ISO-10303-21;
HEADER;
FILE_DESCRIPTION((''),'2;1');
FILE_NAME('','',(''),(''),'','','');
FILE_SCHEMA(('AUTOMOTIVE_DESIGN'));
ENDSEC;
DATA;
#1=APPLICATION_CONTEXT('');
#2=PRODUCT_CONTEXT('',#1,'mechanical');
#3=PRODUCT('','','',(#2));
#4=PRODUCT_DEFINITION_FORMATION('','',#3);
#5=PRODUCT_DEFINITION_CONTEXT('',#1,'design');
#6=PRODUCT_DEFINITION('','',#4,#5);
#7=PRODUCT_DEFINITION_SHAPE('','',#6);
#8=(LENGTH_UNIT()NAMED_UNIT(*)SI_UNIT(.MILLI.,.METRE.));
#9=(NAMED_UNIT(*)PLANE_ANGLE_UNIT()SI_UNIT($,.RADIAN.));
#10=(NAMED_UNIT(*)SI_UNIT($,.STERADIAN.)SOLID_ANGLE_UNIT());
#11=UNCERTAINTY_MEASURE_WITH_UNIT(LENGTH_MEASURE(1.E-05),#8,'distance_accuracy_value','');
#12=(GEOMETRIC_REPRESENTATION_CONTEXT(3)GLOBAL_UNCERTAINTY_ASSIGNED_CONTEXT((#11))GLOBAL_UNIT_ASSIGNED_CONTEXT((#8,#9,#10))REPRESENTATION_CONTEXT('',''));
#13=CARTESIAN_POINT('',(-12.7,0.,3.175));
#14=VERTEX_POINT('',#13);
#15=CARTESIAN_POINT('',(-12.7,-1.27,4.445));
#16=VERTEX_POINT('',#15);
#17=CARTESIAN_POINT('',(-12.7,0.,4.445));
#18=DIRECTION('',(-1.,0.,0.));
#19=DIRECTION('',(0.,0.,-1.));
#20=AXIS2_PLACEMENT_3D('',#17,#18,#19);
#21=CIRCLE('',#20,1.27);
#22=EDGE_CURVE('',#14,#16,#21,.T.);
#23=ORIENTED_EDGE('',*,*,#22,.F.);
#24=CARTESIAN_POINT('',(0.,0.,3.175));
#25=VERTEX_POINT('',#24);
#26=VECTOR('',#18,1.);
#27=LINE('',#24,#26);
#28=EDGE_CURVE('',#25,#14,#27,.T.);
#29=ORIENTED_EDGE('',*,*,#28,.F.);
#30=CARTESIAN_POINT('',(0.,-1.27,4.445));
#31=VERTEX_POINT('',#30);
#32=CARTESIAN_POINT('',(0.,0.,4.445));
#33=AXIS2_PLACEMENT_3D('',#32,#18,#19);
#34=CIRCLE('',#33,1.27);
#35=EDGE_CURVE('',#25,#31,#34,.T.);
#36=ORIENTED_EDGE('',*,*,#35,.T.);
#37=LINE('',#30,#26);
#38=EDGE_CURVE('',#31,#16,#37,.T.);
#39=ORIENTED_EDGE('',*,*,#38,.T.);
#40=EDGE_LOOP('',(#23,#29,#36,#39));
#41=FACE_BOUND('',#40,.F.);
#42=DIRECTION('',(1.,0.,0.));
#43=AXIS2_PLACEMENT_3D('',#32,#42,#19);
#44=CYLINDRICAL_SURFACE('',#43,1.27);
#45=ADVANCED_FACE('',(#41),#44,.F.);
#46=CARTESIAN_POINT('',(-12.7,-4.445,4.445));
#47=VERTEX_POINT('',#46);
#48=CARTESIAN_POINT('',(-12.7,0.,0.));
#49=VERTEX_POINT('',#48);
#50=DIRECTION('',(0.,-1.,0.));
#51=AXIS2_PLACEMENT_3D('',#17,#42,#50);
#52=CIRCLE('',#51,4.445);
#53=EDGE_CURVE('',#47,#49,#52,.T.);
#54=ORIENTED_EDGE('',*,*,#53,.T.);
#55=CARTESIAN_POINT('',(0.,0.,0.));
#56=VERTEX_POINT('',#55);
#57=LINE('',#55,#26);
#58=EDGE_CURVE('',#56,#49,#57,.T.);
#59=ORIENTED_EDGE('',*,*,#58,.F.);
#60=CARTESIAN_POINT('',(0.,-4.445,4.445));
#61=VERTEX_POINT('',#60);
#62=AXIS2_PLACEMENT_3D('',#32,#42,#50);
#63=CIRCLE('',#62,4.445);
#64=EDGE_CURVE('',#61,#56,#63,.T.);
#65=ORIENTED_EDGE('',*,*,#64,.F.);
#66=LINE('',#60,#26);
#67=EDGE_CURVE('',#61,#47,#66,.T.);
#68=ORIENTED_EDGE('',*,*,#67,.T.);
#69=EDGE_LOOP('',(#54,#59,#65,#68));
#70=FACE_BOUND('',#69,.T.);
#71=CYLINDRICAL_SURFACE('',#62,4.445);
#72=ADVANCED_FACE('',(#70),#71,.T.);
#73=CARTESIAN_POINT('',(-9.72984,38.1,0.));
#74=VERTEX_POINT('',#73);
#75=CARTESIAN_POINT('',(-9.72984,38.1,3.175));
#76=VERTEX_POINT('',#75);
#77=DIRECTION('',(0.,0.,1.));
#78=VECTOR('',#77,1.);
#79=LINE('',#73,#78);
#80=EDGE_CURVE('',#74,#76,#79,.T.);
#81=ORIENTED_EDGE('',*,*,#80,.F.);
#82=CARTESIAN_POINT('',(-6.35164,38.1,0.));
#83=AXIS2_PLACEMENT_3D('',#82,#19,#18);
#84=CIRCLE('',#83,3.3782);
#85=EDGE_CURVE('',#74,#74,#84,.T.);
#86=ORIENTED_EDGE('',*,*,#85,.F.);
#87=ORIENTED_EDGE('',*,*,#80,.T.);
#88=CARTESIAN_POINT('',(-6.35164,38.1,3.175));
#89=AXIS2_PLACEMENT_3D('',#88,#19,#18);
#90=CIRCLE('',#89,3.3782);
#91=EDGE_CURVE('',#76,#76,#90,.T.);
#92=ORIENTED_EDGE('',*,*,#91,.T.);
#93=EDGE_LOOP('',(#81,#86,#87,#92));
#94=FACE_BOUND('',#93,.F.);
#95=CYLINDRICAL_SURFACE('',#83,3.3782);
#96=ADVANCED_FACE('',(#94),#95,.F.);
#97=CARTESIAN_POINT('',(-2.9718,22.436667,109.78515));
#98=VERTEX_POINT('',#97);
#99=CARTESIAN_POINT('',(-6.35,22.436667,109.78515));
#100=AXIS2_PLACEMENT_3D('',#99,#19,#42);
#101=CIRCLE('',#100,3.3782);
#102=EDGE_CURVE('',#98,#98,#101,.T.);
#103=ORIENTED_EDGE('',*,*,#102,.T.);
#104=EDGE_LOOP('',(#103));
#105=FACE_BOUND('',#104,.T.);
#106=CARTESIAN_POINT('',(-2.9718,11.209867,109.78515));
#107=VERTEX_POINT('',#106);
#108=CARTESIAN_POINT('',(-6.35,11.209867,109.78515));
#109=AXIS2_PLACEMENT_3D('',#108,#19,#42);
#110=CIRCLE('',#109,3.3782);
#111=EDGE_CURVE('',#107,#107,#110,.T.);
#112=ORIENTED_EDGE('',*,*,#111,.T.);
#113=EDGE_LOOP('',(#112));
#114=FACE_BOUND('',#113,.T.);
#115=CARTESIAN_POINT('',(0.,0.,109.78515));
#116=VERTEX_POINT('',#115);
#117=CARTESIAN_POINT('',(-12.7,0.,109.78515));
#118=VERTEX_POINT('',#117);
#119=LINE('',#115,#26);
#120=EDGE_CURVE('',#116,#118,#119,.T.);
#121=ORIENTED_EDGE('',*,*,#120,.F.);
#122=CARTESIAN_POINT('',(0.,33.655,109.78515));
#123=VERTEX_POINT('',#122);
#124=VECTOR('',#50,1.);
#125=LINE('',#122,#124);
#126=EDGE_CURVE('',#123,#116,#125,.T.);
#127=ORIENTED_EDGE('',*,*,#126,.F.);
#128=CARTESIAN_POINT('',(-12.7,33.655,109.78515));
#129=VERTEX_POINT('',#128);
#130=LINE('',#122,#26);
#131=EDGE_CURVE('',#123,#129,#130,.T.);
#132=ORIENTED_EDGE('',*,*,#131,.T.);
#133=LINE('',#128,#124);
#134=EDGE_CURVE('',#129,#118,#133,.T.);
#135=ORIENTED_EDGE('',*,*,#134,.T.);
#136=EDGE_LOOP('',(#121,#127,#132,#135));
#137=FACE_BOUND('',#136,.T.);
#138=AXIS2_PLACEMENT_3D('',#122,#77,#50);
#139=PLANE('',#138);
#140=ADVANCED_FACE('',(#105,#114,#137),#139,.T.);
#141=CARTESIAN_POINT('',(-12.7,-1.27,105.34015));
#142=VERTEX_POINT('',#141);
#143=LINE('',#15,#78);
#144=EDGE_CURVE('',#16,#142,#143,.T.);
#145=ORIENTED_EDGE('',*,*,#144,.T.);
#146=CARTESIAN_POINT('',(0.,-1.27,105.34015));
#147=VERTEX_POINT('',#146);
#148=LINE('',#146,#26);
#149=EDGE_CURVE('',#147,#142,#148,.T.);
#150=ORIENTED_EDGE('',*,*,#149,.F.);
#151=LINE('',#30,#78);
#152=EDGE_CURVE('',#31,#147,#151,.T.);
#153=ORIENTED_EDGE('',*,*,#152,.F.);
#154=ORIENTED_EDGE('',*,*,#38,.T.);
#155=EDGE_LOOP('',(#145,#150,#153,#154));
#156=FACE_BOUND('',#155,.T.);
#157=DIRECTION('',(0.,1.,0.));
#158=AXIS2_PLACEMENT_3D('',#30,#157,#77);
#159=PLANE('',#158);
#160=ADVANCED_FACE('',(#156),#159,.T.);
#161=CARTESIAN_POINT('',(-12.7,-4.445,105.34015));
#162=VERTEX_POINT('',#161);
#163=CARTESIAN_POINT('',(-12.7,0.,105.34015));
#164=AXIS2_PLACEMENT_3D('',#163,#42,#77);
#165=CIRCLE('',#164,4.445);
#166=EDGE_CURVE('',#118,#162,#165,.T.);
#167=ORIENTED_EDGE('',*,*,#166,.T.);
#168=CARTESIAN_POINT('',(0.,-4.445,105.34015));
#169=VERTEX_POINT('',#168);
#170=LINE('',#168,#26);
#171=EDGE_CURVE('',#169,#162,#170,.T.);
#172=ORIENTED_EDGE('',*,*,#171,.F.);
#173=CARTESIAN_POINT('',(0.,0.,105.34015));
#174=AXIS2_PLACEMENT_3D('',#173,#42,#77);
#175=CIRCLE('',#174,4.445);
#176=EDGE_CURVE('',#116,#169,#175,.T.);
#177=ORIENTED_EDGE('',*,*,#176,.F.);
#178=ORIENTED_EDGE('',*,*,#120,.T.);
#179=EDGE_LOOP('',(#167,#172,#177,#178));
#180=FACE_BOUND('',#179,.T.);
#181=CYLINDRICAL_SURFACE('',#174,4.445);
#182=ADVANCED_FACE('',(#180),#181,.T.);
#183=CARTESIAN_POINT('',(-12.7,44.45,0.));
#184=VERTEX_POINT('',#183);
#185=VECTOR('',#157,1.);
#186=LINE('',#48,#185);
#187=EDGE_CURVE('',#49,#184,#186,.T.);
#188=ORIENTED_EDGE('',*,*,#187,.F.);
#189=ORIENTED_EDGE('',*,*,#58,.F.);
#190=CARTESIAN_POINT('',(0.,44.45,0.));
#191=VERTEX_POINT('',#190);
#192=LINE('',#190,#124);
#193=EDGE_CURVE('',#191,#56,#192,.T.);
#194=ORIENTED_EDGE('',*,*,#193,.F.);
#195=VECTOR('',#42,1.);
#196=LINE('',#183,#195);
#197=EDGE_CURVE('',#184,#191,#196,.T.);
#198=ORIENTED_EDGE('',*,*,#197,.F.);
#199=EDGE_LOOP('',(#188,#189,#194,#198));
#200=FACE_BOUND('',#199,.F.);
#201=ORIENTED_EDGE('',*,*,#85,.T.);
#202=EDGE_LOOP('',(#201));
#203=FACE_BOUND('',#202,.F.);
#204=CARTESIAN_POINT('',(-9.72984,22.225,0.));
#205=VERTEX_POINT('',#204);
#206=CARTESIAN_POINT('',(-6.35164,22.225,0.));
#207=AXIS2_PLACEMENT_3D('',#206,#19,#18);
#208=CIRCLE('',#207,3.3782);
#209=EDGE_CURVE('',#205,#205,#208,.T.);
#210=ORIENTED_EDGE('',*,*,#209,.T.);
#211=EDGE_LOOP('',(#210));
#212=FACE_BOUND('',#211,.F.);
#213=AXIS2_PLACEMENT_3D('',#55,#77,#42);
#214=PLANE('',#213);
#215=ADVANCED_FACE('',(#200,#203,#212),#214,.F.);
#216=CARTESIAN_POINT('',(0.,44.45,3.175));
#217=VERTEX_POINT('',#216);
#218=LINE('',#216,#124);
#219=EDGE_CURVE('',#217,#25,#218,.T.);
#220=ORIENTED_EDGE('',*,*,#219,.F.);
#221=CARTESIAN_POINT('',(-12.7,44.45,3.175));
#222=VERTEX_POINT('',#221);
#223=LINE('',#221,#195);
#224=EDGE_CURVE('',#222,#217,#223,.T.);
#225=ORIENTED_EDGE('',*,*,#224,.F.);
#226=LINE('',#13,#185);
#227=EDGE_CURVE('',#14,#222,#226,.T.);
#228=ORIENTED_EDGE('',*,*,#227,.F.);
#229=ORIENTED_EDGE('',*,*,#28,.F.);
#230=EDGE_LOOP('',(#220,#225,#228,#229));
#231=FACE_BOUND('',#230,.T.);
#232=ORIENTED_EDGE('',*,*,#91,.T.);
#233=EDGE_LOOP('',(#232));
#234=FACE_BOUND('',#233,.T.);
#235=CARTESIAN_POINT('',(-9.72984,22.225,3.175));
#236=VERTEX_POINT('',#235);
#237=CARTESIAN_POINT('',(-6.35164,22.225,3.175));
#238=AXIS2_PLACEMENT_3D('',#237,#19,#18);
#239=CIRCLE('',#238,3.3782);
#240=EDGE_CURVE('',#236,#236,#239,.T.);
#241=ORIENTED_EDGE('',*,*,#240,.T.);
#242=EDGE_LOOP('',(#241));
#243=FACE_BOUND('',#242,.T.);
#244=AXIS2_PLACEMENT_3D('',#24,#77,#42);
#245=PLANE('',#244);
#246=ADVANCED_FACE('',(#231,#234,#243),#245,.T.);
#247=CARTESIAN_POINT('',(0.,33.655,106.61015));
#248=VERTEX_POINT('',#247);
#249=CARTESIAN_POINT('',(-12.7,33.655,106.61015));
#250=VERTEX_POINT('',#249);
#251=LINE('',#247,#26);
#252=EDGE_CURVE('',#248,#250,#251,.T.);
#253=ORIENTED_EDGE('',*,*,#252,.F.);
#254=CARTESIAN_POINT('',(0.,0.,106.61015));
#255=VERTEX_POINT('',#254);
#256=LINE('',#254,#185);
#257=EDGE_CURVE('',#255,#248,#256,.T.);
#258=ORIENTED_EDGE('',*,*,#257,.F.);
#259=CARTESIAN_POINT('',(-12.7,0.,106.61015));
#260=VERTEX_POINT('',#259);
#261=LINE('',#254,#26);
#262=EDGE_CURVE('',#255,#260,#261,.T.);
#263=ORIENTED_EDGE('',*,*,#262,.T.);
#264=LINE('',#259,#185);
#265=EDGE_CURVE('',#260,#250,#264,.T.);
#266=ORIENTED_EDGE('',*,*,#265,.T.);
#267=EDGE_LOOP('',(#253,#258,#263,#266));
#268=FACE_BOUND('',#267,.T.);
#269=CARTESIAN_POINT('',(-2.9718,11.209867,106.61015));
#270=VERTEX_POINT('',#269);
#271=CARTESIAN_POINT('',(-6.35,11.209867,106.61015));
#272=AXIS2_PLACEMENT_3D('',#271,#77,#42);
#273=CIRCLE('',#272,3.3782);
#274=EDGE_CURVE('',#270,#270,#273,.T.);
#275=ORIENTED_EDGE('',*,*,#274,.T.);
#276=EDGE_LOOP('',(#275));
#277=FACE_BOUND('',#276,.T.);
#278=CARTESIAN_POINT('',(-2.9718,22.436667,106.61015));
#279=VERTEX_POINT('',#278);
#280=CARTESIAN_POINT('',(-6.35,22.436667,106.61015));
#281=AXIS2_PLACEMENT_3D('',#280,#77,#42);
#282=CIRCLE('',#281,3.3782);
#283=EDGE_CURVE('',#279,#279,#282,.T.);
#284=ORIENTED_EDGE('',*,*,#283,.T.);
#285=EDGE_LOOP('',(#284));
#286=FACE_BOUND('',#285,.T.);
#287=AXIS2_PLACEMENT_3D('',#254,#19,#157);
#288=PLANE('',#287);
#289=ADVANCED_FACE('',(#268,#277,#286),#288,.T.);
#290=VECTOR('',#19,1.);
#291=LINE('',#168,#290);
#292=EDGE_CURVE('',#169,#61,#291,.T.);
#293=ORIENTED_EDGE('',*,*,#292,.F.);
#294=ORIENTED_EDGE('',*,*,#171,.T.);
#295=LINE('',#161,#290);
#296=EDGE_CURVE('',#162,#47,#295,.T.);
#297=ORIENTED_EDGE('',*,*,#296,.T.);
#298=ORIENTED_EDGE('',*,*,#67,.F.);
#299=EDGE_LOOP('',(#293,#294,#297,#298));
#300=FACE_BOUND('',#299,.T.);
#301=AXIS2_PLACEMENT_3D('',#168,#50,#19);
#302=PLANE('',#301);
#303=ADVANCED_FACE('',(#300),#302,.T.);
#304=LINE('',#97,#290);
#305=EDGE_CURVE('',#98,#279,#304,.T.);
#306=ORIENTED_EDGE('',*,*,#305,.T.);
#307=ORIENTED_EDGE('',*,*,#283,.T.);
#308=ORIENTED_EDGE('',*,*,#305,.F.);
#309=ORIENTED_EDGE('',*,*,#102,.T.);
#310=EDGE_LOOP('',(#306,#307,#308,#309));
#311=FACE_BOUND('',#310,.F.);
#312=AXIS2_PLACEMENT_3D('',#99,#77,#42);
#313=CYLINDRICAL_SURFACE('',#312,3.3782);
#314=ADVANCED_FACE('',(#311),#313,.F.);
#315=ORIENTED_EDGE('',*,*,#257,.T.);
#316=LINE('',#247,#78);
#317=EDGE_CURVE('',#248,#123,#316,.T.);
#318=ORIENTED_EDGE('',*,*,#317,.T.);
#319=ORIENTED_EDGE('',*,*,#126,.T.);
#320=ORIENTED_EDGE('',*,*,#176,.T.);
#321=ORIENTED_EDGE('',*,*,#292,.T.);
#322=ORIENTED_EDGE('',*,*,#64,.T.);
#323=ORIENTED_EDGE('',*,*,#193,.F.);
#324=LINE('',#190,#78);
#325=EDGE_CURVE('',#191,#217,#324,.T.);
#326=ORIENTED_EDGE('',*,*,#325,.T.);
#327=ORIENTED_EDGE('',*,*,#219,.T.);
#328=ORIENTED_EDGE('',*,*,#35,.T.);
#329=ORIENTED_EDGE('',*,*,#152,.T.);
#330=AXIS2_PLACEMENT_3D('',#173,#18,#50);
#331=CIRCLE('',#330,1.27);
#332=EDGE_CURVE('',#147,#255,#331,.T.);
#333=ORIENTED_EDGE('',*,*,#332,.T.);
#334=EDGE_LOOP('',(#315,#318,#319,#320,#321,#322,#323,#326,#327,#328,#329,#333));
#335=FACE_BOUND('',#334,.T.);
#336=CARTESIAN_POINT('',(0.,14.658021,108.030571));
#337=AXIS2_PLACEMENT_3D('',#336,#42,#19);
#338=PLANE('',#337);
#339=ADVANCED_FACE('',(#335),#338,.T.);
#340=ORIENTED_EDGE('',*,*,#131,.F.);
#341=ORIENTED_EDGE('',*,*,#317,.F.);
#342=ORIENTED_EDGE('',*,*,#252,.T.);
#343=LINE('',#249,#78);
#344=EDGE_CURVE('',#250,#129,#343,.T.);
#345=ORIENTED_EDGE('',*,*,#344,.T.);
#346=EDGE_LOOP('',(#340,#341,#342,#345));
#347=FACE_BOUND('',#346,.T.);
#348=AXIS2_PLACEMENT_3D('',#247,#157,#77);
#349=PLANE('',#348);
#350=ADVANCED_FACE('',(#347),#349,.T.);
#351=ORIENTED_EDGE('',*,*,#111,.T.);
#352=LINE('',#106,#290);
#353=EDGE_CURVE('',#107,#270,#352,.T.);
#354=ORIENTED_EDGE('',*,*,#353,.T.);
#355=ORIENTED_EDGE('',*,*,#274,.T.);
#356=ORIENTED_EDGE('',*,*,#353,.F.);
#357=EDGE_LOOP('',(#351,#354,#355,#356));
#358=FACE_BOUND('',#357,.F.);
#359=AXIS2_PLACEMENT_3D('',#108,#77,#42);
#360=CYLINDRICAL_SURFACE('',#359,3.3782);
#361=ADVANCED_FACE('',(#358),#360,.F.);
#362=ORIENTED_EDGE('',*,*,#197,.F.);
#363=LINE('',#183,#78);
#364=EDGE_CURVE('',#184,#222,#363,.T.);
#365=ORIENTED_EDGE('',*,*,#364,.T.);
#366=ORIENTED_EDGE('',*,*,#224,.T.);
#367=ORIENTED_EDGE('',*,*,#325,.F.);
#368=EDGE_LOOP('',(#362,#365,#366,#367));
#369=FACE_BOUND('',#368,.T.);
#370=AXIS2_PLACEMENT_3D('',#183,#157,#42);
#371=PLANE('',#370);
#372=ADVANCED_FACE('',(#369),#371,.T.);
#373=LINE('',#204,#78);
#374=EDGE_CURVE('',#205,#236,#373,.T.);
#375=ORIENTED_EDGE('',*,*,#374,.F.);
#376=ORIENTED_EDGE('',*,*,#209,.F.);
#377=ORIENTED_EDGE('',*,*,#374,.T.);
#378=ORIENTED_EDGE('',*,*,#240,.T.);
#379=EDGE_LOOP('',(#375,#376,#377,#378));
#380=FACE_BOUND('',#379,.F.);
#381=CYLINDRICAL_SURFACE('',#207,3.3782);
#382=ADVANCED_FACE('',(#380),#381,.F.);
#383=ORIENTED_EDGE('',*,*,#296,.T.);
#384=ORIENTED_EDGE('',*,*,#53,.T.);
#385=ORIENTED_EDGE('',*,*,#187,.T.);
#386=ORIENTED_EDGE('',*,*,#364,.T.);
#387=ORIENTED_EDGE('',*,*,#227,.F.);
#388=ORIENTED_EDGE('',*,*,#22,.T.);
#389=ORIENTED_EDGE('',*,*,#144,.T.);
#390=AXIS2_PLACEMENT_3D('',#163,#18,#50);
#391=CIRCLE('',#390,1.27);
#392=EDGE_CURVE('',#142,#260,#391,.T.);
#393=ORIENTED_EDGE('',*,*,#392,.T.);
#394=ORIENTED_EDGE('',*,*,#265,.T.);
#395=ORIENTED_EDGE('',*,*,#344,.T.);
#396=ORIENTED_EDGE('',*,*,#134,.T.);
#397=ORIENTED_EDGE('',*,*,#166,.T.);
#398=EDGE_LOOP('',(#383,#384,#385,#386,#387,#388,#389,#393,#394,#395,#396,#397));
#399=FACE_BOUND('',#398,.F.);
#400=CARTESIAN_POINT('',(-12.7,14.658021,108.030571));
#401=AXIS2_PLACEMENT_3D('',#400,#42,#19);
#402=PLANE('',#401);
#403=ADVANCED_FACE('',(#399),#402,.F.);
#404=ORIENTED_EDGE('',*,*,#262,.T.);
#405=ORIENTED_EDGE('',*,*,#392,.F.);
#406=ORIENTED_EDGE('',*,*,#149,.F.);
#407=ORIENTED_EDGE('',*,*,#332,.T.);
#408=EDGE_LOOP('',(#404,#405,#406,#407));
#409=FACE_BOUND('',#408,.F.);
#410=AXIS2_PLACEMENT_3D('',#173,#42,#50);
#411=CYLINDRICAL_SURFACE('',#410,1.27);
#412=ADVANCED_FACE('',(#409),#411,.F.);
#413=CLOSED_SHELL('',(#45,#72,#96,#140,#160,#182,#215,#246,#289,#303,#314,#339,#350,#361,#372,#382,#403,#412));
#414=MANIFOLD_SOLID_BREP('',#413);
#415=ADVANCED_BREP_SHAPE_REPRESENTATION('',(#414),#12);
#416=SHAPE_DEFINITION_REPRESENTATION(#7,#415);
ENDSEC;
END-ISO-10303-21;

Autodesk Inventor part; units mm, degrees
ref_plane "YZ Plane" through (0, 0, 0) normal (1, 0, 0) x (0, 1, 0)
ref_plane "XZ Plane" through (0, 0, 0) normal (0, 1, 0) x (-1, 0, 0)
ref_plane "XY Plane" through (0, 0, 0) normal (0, 0, 1) x (1, 0, 0)
sketch "Sketch1" plane through (0, 0, 0) normal (0, 0, 1) x (1, 0, 0)
  line L0 (0, 0) -> (187.378778, 0)
  line L1 (187.378778, -12.7) -> (0, -12.7)
  line L2 (0, 0) -> (35.7378, 0)
  line L3 (35.7378, 0) -> (35.7378, -1.5875)
  line L4 (35.7378, -1.5875) -> (36.53155, -1.5875)
  line L5 (36.53155, -1.5875) -> (36.53155, 0)
  line L6 (35.7378, -1.5875) -> (34.94405, -1.5875)
  line L7 (34.94405, -1.5875) -> (34.94405, 0)
  line L8 (36.53155, -12.7) -> (34.94405, -12.7)
  line L9 (34.94405, -12.7) -> (34.94405, -11.1125)
  line L10 (34.94405, -11.1125) -> (36.53155, -11.1125)
  line L11 (36.53155, -11.1125) -> (36.53155, -12.7)
  line L12 (187.378778, 0) -> (151.640978, 0)
sketch "Sketch3" plane through (0, 0, 0) normal (0, 0, -1) x (-1, 0, 0)
  circle A0 centre (6.35164, 38.1) radius 3.3782
  circle A1 centre (6.35164, 22.225) radius 3.3782
sketch "Sketch6" plane through (-12.7, 33.655, 109.78515) normal (0, 0, 1) x (1, 0, 0)
  line L0 (0, 0) -> (12.7, 0)
  line L1 (0, -33.655) -> (0, 0)
  line L2 (6.35, 0) -> (6.35, -11.218333)
  line L3 (6.35, -11.218333) -> (6.35, -22.445133)
  circle A0 centre (6.35, -11.218333) radius 3.3782
  circle A1 centre (6.35, -22.445133) radius 3.3782
  dimension "d29" = 11.21833
  dimension "d31" = 11.2268
  dimension "d32" = 6.7564
  dimension "d33" = 6.7564
sketch "Sketch1 outline for Plate1" plane through (0, 0, 0) normal (0, 0, 1) x (1, 0, 0)
  line L0 (0, 0) -> (-12.7, 0)
  line L1 (-12.7, 0) -> (-12.7, 44.45)
  line L2 (-12.7, 44.45) -> (0, 44.45)
  line L3 (0, 44.45) -> (0, 0)
extrude "Plate1" add sketch "Sketch1 outline for Plate1" along normal blind 3.175
sketch "Sketch2" plane through (0, -12.7, 0) normal (0, 0, 1) x (1, 0, 0)
  line L0 (35.7378, 11.1125) -> (35.7378, 12.7)
  line L1 (0, 12.7) -> (35.7378, 12.7)
  line L2 (36.53155, 12.7) -> (187.378778, 12.7)
  line L3 (35.7378, 11.1125) -> (34.94405, 11.1125)
  line L4 (34.94405, 11.1125) -> (34.94405, 12.7)
edge flange "Flange1" height 105.34015 angle 90 thickness 3.175 bend radius 1.27 thickness toward (0, -1, 0) relief straight relief width 3.175 relief depth 1.5875 edges at (-6.35, 0, 3.175) wall of the first edge with corners at (-12.7, -1.27, 4.445) (0, -1.27, 4.445) (0, -1.27, 105.34015) (-12.7, -1.27, 105.34015)
bend "Bend1"
corner "Corner1"
sketch "Sketch4" plane through (0, -12.7, 0) normal (0, 0, 1) x (1, 0, 0)
  line L0 (187.378778, 0) -> (36.53155, 0)
  line L1 (36.53155, 12.7) -> (187.378778, 12.7)
  line L2 (187.378778, 12.7) -> (140.845978, 12.7)
  line L3 (140.845978, 12.7) -> (140.845978, 11.1125)
  line L4 (140.845978, 11.1125) -> (141.639728, 11.1125)
  line L5 (141.639728, 11.1125) -> (141.639728, 12.7)
  line L6 (140.845978, 11.1125) -> (140.052228, 11.1125)
  line L7 (140.052228, 11.1125) -> (140.052228, 12.7)
  line L8 (140.845978, 0) -> (141.639728, 0)
  line L9 (141.639728, 0) -> (141.639728, 1.5875)
  line L10 (141.639728, 1.5875) -> (140.052228, 1.5875)
  line L11 (140.052228, 1.5875) -> (140.052228, 0)
  dimension "d15" = 1.5875
extrude "Cut1" cut sketch "Sketch3" against normal blind 3.175
sketch "Sketch5" plane through (0, -12.7, 0) normal (0, 0, 1) x (1, 0, 0)
  line L0 (140.845978, 12.7) -> (140.845978, 11.1125)
  line L1 (140.845978, 12.7) -> (187.378778, 12.7)
  line L2 (140.845978, 11.1125) -> (141.639728, 11.1125)
  line L3 (141.639728, 11.1125) -> (141.639728, 12.7)
edge flange "Flange2" height 38.1 angle 90 thickness 3.175 bend radius 1.27 thickness toward (0, 0, 1) relief straight relief width 3.175 relief depth 1.5875 edges at (-6.35, -1.27, 105.34015) wall of the first edge with corners at (-12.7, 0, 106.61015) (0, 0, 106.61015) (0, 33.655, 106.61015) (-12.7, 33.655, 106.61015)
bend "Bend2"
corner "Corner2"
extrude "Cut3" cut sketch "Sketch6" against normal blind 3.175
equation "\"d3\" = BendReliefWidth"
equation "\"d4\" = BendReliefDepth"
equation "\"d5\" = MinimumRemnant"
equation "\"d6\" = BendRadius"
equation "\"d10\" = CornerReliefSize"
equation "\"d11\" = GapSize"
equation "\"d12\" = JacobiRadiusSize"
equation "\"d19\" = BendReliefWidth"
equation "\"d20\" = BendReliefDepth"
equation "\"d21\" = MinimumRemnant"
equation "\"d22\" = BendRadius"
equation "\"d26\" = CornerReliefSize"
equation "\"d27\" = GapSize"
equation "\"d28\" = JacobiRadiusSize"
equation "\"BendRadius\" = Thickness"
equation "\"BendReliefWidth\" = Thickness"
equation "\"BendReliefDepth\" = 0.5 * Thickness"
equation "\"CornerReliefSize\" = 4 * Thickness"
equation "\"MinimumRemnant\" = 2 * Thickness"
equation "\"TransitionRadius\" = BendRadius"
equation "\"JacobiRadiusSize\" = Thickness"
equation "\"GapSize\" = Thickness"
equation "\"d2\" = BendRadius"
equation "\"d6\" = Thickness"
equation "\"d16\" = Thickness"
equation "\"Thickness\" = 3.175"
properties part number "bottom pulley mount"
